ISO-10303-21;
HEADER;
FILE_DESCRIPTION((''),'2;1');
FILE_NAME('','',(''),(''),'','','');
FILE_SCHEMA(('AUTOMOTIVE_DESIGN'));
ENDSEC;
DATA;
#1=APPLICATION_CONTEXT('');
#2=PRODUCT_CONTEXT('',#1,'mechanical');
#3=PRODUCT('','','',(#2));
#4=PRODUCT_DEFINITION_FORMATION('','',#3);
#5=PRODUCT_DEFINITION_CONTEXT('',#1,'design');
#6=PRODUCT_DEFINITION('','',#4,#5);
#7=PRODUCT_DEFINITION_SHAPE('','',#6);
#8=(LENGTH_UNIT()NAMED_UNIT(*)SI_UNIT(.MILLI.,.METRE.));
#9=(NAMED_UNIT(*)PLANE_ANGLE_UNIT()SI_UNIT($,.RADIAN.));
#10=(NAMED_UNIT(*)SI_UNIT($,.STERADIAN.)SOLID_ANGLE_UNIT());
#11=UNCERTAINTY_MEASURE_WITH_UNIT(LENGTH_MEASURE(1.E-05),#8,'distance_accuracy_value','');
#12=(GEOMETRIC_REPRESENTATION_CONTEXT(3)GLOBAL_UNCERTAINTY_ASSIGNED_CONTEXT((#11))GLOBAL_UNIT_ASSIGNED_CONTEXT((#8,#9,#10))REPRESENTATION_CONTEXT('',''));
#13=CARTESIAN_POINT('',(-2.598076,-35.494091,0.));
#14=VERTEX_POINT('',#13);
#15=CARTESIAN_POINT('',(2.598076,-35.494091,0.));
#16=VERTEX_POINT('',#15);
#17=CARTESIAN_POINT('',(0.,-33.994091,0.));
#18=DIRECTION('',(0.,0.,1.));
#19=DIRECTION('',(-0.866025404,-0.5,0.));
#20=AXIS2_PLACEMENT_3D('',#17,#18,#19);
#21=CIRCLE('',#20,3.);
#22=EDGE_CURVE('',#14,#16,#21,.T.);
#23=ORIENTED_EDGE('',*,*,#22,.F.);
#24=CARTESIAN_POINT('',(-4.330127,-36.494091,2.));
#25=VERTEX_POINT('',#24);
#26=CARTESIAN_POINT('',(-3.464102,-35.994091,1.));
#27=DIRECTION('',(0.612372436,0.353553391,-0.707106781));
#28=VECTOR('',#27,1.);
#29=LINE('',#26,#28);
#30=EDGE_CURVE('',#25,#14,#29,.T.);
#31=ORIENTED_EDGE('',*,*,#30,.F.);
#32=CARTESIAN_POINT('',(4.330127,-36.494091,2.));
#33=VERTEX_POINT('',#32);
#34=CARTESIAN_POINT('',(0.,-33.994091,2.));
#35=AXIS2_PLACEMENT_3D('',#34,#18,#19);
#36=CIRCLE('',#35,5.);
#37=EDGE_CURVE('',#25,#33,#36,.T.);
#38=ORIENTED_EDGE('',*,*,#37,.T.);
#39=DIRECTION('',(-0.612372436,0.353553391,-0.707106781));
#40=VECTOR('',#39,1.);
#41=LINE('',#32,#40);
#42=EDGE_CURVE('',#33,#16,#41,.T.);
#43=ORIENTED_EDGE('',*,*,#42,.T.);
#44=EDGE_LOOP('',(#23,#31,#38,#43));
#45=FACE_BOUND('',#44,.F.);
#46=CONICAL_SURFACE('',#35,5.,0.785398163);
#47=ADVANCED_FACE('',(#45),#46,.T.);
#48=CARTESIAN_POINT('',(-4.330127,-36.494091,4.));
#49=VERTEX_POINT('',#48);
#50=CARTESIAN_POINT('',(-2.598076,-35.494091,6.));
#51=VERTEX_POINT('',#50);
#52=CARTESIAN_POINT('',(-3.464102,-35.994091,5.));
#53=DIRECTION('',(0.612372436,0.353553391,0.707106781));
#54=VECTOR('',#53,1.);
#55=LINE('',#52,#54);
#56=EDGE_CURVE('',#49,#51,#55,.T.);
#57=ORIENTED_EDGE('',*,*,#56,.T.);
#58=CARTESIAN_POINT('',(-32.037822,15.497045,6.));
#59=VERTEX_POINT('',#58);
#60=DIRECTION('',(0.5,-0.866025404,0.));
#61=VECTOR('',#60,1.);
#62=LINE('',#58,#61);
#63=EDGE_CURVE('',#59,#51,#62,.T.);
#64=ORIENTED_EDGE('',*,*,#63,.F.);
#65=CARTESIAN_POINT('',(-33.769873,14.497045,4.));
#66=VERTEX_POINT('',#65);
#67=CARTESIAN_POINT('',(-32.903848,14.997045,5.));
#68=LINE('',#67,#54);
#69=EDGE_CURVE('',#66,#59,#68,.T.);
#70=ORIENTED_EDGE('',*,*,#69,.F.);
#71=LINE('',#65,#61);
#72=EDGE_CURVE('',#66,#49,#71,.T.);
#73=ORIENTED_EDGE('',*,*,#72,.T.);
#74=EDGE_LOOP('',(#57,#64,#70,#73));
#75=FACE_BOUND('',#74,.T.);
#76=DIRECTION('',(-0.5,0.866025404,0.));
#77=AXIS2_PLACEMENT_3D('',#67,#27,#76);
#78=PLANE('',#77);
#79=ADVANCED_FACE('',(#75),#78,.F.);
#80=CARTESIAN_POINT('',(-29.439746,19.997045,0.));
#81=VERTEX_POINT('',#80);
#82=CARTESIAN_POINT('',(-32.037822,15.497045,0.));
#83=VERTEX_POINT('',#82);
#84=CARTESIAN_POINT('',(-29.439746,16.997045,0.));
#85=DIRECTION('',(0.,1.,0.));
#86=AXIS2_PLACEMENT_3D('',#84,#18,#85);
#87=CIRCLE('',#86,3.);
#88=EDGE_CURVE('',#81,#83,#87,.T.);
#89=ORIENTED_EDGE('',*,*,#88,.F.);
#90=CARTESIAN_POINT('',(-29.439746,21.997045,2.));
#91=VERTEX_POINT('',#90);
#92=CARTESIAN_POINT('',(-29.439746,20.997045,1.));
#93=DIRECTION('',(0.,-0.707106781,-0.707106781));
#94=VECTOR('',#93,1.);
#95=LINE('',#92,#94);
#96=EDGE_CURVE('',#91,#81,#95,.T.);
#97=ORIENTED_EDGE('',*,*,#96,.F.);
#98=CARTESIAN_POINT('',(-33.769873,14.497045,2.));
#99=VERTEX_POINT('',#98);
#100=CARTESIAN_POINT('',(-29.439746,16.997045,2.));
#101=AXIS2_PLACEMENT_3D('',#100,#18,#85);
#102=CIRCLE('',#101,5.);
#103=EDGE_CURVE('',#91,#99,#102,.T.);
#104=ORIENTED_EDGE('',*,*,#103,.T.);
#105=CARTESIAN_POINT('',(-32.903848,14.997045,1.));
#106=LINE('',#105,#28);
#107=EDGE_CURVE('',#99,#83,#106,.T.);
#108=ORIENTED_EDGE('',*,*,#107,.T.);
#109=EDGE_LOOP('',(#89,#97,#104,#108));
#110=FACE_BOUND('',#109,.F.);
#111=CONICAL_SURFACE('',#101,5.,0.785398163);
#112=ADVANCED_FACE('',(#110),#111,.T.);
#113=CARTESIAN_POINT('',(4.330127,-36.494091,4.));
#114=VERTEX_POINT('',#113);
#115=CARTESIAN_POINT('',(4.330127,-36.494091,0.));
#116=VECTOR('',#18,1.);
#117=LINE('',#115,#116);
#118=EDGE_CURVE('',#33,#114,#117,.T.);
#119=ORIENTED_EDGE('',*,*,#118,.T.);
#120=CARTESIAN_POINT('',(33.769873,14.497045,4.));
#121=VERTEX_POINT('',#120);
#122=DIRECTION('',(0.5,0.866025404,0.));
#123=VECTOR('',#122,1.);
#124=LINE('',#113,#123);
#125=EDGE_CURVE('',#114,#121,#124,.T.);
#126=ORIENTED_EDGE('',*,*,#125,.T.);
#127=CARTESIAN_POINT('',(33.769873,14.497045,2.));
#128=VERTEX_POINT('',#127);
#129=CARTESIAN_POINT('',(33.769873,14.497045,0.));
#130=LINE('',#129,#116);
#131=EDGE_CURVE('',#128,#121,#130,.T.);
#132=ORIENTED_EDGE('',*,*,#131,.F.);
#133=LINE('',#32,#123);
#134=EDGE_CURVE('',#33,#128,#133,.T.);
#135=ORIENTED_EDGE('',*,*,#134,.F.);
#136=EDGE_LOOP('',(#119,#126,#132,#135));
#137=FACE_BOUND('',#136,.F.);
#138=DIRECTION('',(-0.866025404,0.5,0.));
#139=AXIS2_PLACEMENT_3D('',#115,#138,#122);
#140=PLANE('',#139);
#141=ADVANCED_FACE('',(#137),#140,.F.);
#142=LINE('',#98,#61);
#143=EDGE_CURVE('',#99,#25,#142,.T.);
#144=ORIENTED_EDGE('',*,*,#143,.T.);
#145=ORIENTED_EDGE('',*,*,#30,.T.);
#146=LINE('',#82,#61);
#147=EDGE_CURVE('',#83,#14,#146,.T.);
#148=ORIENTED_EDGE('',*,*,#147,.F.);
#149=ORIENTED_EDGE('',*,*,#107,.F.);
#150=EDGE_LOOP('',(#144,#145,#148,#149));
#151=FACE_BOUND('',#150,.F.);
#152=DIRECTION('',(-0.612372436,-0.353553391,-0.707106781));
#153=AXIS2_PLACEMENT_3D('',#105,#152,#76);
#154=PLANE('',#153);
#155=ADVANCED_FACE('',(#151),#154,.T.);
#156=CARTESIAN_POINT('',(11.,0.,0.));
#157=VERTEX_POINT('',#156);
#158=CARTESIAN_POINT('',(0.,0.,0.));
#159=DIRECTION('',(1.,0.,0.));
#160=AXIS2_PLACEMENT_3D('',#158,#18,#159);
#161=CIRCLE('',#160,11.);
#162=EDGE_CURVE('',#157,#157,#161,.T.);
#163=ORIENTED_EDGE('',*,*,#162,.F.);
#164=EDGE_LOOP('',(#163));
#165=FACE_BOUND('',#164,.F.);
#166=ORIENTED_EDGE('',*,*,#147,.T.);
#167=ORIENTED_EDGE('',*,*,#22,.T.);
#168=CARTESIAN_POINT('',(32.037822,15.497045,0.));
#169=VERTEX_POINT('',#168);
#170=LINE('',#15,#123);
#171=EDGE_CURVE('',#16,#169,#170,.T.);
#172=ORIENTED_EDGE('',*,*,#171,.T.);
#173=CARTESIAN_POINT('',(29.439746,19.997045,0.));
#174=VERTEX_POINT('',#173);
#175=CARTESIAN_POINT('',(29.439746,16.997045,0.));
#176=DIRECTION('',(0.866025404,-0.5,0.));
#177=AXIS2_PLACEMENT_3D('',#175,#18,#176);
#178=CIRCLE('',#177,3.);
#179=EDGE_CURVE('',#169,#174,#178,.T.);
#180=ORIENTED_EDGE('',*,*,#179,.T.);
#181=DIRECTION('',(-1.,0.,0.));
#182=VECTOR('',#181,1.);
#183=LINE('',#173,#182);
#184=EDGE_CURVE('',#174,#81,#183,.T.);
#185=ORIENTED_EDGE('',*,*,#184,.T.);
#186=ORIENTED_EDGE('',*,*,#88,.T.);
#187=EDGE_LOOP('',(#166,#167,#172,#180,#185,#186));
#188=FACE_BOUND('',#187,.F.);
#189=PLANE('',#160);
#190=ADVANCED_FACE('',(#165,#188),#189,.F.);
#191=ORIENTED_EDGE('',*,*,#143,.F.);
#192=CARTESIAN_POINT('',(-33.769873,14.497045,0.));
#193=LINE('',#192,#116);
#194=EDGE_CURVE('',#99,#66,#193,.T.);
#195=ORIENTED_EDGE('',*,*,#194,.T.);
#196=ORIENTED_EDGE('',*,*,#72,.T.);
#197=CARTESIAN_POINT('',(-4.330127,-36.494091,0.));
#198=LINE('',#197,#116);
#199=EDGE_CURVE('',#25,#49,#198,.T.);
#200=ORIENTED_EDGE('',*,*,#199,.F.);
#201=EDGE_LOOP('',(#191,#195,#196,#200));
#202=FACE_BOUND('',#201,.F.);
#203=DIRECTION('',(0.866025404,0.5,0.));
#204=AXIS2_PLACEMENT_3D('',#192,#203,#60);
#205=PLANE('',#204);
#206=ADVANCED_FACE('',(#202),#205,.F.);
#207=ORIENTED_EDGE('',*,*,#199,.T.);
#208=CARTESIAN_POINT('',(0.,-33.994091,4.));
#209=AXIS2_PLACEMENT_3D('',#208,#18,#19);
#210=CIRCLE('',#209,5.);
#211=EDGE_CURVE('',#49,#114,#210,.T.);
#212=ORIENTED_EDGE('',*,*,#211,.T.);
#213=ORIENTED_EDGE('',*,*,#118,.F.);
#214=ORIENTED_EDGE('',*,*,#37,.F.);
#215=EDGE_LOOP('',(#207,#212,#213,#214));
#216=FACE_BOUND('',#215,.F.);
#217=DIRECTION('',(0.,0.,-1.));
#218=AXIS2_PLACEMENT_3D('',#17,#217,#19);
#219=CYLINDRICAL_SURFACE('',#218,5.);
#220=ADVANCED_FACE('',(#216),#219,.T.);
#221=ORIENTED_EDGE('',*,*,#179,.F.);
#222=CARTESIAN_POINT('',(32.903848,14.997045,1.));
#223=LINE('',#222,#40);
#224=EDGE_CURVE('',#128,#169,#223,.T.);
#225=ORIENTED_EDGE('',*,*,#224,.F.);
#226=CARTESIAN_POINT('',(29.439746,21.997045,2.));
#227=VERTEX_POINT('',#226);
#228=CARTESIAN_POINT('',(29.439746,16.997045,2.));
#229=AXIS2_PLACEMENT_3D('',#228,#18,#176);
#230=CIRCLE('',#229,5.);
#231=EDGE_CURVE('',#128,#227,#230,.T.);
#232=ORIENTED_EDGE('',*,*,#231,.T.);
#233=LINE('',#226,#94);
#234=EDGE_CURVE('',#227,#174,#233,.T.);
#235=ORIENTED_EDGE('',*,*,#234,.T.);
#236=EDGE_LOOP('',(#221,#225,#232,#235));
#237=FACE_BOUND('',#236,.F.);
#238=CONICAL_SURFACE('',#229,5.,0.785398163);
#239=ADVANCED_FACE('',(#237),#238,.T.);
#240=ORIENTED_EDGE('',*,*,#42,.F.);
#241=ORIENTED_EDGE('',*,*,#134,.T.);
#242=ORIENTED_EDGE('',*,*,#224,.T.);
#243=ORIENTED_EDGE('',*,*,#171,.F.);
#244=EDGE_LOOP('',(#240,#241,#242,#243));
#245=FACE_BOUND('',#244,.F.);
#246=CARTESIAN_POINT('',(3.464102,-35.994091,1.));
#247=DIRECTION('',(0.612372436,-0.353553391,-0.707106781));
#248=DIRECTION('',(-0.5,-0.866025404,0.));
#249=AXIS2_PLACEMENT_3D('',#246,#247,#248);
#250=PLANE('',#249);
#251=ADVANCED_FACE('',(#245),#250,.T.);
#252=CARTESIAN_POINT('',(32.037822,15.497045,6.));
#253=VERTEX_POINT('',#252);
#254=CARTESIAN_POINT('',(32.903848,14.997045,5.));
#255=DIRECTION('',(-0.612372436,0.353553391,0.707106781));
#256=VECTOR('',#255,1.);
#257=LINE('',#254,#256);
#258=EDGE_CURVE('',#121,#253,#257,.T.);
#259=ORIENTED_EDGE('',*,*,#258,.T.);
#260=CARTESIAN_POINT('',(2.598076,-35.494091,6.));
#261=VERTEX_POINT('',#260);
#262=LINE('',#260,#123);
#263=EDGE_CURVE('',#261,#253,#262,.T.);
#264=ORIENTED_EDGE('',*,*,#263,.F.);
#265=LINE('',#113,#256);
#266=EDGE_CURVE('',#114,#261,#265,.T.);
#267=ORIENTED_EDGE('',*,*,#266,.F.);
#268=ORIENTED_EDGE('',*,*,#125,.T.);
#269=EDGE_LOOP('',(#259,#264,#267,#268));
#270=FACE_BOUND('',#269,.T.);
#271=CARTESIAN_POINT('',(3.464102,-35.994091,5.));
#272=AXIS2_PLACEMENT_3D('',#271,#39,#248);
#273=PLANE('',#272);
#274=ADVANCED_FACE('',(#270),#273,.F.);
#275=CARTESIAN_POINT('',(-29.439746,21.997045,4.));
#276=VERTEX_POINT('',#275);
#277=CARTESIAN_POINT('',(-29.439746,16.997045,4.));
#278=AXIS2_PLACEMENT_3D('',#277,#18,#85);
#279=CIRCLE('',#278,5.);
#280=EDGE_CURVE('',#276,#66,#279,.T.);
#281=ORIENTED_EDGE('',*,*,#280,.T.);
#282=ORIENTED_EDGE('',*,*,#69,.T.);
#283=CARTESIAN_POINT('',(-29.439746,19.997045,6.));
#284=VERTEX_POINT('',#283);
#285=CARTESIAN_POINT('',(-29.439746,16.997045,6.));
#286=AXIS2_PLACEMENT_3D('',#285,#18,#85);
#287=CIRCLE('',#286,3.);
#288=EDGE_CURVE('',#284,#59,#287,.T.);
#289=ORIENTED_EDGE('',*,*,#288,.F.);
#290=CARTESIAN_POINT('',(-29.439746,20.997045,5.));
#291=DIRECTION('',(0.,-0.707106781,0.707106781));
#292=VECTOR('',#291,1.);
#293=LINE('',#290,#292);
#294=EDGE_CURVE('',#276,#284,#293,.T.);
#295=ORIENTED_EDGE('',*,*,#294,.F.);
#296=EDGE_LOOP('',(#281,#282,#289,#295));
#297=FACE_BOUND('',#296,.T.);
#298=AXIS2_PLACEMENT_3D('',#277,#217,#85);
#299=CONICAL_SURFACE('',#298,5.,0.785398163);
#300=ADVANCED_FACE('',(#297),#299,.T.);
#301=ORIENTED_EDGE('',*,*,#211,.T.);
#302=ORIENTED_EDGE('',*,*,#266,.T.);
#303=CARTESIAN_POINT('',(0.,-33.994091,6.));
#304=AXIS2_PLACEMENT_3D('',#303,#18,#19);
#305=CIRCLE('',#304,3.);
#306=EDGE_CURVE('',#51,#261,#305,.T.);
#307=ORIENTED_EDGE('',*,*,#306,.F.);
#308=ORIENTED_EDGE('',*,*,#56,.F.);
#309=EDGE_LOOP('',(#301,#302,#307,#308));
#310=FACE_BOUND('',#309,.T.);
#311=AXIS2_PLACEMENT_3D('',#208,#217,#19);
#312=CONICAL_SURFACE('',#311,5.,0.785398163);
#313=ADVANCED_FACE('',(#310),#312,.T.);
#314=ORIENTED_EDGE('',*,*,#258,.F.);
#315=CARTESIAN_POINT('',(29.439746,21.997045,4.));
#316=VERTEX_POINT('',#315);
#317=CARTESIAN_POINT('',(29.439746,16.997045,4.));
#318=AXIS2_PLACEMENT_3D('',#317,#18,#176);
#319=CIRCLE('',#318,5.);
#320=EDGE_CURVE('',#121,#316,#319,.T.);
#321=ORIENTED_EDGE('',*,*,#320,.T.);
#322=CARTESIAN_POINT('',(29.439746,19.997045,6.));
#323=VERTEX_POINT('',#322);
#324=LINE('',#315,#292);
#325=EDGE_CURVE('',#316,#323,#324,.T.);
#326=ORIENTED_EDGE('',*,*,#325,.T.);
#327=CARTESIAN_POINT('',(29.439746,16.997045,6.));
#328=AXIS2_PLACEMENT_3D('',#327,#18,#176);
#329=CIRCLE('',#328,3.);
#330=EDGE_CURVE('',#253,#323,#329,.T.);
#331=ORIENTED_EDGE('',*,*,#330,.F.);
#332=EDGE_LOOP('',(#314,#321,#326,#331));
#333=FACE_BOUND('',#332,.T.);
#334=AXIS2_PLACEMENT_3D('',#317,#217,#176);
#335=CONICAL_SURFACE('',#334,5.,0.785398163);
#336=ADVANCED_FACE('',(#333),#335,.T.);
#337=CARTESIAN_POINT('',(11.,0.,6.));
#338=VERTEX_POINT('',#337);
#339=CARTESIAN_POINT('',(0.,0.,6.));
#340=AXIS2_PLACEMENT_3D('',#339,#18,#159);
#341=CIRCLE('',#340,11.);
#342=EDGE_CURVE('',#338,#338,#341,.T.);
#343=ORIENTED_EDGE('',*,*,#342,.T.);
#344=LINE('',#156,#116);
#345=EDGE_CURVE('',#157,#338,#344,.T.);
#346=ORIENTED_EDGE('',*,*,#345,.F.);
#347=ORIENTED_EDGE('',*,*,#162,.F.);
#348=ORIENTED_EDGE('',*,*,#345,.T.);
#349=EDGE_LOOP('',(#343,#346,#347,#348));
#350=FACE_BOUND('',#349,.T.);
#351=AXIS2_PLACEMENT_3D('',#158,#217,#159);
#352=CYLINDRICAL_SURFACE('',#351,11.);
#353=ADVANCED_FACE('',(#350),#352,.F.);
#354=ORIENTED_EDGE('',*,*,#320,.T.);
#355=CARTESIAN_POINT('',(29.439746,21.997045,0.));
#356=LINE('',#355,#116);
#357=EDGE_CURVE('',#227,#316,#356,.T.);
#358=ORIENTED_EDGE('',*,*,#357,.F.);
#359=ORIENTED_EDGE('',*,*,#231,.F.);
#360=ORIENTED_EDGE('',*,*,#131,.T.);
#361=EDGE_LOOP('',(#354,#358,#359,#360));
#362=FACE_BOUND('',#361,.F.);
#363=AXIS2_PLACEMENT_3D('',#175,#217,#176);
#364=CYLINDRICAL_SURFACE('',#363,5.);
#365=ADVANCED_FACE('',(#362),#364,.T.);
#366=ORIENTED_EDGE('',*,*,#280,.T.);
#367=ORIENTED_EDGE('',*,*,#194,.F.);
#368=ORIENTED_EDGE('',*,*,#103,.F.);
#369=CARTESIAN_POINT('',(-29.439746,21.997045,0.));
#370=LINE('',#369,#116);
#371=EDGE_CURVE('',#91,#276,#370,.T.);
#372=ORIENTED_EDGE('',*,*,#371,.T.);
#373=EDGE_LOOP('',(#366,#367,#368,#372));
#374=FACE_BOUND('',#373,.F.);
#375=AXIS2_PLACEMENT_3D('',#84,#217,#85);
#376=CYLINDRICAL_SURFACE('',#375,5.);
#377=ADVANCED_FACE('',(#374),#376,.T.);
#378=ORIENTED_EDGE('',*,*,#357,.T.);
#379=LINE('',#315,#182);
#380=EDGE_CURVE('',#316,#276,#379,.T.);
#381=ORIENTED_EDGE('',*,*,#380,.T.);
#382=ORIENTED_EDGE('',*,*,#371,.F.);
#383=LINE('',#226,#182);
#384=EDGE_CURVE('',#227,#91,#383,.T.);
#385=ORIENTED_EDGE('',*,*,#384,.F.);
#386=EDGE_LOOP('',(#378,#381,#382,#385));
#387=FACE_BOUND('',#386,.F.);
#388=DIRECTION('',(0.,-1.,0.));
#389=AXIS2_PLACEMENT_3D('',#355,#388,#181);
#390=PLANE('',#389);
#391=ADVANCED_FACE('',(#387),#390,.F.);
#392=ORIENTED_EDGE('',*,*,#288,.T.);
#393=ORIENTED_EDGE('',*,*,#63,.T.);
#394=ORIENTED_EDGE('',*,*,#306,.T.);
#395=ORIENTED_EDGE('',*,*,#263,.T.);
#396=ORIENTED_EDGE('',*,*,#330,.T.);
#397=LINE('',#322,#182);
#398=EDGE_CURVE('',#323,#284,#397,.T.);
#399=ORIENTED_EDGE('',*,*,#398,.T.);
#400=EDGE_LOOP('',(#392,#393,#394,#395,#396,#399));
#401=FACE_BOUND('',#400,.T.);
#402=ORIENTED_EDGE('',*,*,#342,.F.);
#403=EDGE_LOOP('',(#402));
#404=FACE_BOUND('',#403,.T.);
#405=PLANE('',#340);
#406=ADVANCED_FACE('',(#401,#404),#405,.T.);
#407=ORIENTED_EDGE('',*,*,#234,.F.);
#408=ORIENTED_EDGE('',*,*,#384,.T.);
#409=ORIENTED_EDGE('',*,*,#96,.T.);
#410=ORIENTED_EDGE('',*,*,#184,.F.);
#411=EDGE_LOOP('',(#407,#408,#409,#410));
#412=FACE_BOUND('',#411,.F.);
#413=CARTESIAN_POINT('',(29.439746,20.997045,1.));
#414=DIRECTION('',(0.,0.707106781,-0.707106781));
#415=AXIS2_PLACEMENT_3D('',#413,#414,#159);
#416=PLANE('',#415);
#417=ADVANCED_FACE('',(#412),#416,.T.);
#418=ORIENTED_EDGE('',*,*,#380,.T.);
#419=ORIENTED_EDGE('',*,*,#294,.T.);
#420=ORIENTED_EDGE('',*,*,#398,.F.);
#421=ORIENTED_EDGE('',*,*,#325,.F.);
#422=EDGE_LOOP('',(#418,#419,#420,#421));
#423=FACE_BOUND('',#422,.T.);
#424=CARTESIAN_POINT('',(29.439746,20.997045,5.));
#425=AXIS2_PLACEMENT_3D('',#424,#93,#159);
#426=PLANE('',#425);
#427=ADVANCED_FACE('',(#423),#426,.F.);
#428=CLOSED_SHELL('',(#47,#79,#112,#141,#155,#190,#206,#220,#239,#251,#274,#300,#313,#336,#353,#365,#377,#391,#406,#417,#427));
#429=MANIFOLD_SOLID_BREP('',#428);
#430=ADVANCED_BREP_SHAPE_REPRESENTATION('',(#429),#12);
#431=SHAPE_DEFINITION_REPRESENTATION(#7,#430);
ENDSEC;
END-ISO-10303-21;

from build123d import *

# Parameters (mm, degrees)
F0_R     = 11
F1_DEPTH = 6
F2_SIZE  = 2


# Not quite as in the source:
# - a feature of the source that left no trace in its solid (it failed there, or was rolled back) is left out


with BuildPart() as f1:
    # F0 (on Top) → F1 (new body)
    with BuildSketch(Plane.XY):
        with BuildLine():
            Line((29.4397459622, 21.9970452561), (-29.4397459622, 21.9970452561))
            ThreePointArc((-29.4397459622, 21.9970452561), (-33.7698729811, 19.4970452561), (-33.7698729811, 14.4970452561))
            Line((-33.7698729811, 14.4970452561), (-4.3301270189, -36.4940905122))
            ThreePointArc((-4.3301270189, -36.4940905122), (0, -38.9940905122), (4.3301270189, -36.4940905122))
            Line((4.3301270189, -36.4940905122), (33.7698729811, 14.4970452561))
            ThreePointArc((33.7698729811, 14.4970452561), (33.7698729811, 19.4970452561), (29.4397459622, 21.9970452561))
        make_face()
        Circle(F0_R, mode=Mode.SUBTRACT)
    extrude(amount=F1_DEPTH)

    # F2
    f2_edges = [f1.edges().sort_by_distance(p)[0] for p in [
        (-19.05, -10.998523, 6),
        (-19.05, -10.998523, 0),
        (0, 21.997045, 6),
        (33.769873, 19.497045, 0),
        (33.769873, 19.497045, 6),
        (0, 21.997045, 0),
        (-33.769873, 19.497045, 0),
        (-33.769873, 19.497045, 6),
        (0, -38.994091, 0),
        (0, -38.994091, 6),
        (19.05, -10.998523, 0),
        (19.05, -10.998523, 6),
    ]]
    chamfer(f2_edges, length=F2_SIZE)


solid = f1.part
